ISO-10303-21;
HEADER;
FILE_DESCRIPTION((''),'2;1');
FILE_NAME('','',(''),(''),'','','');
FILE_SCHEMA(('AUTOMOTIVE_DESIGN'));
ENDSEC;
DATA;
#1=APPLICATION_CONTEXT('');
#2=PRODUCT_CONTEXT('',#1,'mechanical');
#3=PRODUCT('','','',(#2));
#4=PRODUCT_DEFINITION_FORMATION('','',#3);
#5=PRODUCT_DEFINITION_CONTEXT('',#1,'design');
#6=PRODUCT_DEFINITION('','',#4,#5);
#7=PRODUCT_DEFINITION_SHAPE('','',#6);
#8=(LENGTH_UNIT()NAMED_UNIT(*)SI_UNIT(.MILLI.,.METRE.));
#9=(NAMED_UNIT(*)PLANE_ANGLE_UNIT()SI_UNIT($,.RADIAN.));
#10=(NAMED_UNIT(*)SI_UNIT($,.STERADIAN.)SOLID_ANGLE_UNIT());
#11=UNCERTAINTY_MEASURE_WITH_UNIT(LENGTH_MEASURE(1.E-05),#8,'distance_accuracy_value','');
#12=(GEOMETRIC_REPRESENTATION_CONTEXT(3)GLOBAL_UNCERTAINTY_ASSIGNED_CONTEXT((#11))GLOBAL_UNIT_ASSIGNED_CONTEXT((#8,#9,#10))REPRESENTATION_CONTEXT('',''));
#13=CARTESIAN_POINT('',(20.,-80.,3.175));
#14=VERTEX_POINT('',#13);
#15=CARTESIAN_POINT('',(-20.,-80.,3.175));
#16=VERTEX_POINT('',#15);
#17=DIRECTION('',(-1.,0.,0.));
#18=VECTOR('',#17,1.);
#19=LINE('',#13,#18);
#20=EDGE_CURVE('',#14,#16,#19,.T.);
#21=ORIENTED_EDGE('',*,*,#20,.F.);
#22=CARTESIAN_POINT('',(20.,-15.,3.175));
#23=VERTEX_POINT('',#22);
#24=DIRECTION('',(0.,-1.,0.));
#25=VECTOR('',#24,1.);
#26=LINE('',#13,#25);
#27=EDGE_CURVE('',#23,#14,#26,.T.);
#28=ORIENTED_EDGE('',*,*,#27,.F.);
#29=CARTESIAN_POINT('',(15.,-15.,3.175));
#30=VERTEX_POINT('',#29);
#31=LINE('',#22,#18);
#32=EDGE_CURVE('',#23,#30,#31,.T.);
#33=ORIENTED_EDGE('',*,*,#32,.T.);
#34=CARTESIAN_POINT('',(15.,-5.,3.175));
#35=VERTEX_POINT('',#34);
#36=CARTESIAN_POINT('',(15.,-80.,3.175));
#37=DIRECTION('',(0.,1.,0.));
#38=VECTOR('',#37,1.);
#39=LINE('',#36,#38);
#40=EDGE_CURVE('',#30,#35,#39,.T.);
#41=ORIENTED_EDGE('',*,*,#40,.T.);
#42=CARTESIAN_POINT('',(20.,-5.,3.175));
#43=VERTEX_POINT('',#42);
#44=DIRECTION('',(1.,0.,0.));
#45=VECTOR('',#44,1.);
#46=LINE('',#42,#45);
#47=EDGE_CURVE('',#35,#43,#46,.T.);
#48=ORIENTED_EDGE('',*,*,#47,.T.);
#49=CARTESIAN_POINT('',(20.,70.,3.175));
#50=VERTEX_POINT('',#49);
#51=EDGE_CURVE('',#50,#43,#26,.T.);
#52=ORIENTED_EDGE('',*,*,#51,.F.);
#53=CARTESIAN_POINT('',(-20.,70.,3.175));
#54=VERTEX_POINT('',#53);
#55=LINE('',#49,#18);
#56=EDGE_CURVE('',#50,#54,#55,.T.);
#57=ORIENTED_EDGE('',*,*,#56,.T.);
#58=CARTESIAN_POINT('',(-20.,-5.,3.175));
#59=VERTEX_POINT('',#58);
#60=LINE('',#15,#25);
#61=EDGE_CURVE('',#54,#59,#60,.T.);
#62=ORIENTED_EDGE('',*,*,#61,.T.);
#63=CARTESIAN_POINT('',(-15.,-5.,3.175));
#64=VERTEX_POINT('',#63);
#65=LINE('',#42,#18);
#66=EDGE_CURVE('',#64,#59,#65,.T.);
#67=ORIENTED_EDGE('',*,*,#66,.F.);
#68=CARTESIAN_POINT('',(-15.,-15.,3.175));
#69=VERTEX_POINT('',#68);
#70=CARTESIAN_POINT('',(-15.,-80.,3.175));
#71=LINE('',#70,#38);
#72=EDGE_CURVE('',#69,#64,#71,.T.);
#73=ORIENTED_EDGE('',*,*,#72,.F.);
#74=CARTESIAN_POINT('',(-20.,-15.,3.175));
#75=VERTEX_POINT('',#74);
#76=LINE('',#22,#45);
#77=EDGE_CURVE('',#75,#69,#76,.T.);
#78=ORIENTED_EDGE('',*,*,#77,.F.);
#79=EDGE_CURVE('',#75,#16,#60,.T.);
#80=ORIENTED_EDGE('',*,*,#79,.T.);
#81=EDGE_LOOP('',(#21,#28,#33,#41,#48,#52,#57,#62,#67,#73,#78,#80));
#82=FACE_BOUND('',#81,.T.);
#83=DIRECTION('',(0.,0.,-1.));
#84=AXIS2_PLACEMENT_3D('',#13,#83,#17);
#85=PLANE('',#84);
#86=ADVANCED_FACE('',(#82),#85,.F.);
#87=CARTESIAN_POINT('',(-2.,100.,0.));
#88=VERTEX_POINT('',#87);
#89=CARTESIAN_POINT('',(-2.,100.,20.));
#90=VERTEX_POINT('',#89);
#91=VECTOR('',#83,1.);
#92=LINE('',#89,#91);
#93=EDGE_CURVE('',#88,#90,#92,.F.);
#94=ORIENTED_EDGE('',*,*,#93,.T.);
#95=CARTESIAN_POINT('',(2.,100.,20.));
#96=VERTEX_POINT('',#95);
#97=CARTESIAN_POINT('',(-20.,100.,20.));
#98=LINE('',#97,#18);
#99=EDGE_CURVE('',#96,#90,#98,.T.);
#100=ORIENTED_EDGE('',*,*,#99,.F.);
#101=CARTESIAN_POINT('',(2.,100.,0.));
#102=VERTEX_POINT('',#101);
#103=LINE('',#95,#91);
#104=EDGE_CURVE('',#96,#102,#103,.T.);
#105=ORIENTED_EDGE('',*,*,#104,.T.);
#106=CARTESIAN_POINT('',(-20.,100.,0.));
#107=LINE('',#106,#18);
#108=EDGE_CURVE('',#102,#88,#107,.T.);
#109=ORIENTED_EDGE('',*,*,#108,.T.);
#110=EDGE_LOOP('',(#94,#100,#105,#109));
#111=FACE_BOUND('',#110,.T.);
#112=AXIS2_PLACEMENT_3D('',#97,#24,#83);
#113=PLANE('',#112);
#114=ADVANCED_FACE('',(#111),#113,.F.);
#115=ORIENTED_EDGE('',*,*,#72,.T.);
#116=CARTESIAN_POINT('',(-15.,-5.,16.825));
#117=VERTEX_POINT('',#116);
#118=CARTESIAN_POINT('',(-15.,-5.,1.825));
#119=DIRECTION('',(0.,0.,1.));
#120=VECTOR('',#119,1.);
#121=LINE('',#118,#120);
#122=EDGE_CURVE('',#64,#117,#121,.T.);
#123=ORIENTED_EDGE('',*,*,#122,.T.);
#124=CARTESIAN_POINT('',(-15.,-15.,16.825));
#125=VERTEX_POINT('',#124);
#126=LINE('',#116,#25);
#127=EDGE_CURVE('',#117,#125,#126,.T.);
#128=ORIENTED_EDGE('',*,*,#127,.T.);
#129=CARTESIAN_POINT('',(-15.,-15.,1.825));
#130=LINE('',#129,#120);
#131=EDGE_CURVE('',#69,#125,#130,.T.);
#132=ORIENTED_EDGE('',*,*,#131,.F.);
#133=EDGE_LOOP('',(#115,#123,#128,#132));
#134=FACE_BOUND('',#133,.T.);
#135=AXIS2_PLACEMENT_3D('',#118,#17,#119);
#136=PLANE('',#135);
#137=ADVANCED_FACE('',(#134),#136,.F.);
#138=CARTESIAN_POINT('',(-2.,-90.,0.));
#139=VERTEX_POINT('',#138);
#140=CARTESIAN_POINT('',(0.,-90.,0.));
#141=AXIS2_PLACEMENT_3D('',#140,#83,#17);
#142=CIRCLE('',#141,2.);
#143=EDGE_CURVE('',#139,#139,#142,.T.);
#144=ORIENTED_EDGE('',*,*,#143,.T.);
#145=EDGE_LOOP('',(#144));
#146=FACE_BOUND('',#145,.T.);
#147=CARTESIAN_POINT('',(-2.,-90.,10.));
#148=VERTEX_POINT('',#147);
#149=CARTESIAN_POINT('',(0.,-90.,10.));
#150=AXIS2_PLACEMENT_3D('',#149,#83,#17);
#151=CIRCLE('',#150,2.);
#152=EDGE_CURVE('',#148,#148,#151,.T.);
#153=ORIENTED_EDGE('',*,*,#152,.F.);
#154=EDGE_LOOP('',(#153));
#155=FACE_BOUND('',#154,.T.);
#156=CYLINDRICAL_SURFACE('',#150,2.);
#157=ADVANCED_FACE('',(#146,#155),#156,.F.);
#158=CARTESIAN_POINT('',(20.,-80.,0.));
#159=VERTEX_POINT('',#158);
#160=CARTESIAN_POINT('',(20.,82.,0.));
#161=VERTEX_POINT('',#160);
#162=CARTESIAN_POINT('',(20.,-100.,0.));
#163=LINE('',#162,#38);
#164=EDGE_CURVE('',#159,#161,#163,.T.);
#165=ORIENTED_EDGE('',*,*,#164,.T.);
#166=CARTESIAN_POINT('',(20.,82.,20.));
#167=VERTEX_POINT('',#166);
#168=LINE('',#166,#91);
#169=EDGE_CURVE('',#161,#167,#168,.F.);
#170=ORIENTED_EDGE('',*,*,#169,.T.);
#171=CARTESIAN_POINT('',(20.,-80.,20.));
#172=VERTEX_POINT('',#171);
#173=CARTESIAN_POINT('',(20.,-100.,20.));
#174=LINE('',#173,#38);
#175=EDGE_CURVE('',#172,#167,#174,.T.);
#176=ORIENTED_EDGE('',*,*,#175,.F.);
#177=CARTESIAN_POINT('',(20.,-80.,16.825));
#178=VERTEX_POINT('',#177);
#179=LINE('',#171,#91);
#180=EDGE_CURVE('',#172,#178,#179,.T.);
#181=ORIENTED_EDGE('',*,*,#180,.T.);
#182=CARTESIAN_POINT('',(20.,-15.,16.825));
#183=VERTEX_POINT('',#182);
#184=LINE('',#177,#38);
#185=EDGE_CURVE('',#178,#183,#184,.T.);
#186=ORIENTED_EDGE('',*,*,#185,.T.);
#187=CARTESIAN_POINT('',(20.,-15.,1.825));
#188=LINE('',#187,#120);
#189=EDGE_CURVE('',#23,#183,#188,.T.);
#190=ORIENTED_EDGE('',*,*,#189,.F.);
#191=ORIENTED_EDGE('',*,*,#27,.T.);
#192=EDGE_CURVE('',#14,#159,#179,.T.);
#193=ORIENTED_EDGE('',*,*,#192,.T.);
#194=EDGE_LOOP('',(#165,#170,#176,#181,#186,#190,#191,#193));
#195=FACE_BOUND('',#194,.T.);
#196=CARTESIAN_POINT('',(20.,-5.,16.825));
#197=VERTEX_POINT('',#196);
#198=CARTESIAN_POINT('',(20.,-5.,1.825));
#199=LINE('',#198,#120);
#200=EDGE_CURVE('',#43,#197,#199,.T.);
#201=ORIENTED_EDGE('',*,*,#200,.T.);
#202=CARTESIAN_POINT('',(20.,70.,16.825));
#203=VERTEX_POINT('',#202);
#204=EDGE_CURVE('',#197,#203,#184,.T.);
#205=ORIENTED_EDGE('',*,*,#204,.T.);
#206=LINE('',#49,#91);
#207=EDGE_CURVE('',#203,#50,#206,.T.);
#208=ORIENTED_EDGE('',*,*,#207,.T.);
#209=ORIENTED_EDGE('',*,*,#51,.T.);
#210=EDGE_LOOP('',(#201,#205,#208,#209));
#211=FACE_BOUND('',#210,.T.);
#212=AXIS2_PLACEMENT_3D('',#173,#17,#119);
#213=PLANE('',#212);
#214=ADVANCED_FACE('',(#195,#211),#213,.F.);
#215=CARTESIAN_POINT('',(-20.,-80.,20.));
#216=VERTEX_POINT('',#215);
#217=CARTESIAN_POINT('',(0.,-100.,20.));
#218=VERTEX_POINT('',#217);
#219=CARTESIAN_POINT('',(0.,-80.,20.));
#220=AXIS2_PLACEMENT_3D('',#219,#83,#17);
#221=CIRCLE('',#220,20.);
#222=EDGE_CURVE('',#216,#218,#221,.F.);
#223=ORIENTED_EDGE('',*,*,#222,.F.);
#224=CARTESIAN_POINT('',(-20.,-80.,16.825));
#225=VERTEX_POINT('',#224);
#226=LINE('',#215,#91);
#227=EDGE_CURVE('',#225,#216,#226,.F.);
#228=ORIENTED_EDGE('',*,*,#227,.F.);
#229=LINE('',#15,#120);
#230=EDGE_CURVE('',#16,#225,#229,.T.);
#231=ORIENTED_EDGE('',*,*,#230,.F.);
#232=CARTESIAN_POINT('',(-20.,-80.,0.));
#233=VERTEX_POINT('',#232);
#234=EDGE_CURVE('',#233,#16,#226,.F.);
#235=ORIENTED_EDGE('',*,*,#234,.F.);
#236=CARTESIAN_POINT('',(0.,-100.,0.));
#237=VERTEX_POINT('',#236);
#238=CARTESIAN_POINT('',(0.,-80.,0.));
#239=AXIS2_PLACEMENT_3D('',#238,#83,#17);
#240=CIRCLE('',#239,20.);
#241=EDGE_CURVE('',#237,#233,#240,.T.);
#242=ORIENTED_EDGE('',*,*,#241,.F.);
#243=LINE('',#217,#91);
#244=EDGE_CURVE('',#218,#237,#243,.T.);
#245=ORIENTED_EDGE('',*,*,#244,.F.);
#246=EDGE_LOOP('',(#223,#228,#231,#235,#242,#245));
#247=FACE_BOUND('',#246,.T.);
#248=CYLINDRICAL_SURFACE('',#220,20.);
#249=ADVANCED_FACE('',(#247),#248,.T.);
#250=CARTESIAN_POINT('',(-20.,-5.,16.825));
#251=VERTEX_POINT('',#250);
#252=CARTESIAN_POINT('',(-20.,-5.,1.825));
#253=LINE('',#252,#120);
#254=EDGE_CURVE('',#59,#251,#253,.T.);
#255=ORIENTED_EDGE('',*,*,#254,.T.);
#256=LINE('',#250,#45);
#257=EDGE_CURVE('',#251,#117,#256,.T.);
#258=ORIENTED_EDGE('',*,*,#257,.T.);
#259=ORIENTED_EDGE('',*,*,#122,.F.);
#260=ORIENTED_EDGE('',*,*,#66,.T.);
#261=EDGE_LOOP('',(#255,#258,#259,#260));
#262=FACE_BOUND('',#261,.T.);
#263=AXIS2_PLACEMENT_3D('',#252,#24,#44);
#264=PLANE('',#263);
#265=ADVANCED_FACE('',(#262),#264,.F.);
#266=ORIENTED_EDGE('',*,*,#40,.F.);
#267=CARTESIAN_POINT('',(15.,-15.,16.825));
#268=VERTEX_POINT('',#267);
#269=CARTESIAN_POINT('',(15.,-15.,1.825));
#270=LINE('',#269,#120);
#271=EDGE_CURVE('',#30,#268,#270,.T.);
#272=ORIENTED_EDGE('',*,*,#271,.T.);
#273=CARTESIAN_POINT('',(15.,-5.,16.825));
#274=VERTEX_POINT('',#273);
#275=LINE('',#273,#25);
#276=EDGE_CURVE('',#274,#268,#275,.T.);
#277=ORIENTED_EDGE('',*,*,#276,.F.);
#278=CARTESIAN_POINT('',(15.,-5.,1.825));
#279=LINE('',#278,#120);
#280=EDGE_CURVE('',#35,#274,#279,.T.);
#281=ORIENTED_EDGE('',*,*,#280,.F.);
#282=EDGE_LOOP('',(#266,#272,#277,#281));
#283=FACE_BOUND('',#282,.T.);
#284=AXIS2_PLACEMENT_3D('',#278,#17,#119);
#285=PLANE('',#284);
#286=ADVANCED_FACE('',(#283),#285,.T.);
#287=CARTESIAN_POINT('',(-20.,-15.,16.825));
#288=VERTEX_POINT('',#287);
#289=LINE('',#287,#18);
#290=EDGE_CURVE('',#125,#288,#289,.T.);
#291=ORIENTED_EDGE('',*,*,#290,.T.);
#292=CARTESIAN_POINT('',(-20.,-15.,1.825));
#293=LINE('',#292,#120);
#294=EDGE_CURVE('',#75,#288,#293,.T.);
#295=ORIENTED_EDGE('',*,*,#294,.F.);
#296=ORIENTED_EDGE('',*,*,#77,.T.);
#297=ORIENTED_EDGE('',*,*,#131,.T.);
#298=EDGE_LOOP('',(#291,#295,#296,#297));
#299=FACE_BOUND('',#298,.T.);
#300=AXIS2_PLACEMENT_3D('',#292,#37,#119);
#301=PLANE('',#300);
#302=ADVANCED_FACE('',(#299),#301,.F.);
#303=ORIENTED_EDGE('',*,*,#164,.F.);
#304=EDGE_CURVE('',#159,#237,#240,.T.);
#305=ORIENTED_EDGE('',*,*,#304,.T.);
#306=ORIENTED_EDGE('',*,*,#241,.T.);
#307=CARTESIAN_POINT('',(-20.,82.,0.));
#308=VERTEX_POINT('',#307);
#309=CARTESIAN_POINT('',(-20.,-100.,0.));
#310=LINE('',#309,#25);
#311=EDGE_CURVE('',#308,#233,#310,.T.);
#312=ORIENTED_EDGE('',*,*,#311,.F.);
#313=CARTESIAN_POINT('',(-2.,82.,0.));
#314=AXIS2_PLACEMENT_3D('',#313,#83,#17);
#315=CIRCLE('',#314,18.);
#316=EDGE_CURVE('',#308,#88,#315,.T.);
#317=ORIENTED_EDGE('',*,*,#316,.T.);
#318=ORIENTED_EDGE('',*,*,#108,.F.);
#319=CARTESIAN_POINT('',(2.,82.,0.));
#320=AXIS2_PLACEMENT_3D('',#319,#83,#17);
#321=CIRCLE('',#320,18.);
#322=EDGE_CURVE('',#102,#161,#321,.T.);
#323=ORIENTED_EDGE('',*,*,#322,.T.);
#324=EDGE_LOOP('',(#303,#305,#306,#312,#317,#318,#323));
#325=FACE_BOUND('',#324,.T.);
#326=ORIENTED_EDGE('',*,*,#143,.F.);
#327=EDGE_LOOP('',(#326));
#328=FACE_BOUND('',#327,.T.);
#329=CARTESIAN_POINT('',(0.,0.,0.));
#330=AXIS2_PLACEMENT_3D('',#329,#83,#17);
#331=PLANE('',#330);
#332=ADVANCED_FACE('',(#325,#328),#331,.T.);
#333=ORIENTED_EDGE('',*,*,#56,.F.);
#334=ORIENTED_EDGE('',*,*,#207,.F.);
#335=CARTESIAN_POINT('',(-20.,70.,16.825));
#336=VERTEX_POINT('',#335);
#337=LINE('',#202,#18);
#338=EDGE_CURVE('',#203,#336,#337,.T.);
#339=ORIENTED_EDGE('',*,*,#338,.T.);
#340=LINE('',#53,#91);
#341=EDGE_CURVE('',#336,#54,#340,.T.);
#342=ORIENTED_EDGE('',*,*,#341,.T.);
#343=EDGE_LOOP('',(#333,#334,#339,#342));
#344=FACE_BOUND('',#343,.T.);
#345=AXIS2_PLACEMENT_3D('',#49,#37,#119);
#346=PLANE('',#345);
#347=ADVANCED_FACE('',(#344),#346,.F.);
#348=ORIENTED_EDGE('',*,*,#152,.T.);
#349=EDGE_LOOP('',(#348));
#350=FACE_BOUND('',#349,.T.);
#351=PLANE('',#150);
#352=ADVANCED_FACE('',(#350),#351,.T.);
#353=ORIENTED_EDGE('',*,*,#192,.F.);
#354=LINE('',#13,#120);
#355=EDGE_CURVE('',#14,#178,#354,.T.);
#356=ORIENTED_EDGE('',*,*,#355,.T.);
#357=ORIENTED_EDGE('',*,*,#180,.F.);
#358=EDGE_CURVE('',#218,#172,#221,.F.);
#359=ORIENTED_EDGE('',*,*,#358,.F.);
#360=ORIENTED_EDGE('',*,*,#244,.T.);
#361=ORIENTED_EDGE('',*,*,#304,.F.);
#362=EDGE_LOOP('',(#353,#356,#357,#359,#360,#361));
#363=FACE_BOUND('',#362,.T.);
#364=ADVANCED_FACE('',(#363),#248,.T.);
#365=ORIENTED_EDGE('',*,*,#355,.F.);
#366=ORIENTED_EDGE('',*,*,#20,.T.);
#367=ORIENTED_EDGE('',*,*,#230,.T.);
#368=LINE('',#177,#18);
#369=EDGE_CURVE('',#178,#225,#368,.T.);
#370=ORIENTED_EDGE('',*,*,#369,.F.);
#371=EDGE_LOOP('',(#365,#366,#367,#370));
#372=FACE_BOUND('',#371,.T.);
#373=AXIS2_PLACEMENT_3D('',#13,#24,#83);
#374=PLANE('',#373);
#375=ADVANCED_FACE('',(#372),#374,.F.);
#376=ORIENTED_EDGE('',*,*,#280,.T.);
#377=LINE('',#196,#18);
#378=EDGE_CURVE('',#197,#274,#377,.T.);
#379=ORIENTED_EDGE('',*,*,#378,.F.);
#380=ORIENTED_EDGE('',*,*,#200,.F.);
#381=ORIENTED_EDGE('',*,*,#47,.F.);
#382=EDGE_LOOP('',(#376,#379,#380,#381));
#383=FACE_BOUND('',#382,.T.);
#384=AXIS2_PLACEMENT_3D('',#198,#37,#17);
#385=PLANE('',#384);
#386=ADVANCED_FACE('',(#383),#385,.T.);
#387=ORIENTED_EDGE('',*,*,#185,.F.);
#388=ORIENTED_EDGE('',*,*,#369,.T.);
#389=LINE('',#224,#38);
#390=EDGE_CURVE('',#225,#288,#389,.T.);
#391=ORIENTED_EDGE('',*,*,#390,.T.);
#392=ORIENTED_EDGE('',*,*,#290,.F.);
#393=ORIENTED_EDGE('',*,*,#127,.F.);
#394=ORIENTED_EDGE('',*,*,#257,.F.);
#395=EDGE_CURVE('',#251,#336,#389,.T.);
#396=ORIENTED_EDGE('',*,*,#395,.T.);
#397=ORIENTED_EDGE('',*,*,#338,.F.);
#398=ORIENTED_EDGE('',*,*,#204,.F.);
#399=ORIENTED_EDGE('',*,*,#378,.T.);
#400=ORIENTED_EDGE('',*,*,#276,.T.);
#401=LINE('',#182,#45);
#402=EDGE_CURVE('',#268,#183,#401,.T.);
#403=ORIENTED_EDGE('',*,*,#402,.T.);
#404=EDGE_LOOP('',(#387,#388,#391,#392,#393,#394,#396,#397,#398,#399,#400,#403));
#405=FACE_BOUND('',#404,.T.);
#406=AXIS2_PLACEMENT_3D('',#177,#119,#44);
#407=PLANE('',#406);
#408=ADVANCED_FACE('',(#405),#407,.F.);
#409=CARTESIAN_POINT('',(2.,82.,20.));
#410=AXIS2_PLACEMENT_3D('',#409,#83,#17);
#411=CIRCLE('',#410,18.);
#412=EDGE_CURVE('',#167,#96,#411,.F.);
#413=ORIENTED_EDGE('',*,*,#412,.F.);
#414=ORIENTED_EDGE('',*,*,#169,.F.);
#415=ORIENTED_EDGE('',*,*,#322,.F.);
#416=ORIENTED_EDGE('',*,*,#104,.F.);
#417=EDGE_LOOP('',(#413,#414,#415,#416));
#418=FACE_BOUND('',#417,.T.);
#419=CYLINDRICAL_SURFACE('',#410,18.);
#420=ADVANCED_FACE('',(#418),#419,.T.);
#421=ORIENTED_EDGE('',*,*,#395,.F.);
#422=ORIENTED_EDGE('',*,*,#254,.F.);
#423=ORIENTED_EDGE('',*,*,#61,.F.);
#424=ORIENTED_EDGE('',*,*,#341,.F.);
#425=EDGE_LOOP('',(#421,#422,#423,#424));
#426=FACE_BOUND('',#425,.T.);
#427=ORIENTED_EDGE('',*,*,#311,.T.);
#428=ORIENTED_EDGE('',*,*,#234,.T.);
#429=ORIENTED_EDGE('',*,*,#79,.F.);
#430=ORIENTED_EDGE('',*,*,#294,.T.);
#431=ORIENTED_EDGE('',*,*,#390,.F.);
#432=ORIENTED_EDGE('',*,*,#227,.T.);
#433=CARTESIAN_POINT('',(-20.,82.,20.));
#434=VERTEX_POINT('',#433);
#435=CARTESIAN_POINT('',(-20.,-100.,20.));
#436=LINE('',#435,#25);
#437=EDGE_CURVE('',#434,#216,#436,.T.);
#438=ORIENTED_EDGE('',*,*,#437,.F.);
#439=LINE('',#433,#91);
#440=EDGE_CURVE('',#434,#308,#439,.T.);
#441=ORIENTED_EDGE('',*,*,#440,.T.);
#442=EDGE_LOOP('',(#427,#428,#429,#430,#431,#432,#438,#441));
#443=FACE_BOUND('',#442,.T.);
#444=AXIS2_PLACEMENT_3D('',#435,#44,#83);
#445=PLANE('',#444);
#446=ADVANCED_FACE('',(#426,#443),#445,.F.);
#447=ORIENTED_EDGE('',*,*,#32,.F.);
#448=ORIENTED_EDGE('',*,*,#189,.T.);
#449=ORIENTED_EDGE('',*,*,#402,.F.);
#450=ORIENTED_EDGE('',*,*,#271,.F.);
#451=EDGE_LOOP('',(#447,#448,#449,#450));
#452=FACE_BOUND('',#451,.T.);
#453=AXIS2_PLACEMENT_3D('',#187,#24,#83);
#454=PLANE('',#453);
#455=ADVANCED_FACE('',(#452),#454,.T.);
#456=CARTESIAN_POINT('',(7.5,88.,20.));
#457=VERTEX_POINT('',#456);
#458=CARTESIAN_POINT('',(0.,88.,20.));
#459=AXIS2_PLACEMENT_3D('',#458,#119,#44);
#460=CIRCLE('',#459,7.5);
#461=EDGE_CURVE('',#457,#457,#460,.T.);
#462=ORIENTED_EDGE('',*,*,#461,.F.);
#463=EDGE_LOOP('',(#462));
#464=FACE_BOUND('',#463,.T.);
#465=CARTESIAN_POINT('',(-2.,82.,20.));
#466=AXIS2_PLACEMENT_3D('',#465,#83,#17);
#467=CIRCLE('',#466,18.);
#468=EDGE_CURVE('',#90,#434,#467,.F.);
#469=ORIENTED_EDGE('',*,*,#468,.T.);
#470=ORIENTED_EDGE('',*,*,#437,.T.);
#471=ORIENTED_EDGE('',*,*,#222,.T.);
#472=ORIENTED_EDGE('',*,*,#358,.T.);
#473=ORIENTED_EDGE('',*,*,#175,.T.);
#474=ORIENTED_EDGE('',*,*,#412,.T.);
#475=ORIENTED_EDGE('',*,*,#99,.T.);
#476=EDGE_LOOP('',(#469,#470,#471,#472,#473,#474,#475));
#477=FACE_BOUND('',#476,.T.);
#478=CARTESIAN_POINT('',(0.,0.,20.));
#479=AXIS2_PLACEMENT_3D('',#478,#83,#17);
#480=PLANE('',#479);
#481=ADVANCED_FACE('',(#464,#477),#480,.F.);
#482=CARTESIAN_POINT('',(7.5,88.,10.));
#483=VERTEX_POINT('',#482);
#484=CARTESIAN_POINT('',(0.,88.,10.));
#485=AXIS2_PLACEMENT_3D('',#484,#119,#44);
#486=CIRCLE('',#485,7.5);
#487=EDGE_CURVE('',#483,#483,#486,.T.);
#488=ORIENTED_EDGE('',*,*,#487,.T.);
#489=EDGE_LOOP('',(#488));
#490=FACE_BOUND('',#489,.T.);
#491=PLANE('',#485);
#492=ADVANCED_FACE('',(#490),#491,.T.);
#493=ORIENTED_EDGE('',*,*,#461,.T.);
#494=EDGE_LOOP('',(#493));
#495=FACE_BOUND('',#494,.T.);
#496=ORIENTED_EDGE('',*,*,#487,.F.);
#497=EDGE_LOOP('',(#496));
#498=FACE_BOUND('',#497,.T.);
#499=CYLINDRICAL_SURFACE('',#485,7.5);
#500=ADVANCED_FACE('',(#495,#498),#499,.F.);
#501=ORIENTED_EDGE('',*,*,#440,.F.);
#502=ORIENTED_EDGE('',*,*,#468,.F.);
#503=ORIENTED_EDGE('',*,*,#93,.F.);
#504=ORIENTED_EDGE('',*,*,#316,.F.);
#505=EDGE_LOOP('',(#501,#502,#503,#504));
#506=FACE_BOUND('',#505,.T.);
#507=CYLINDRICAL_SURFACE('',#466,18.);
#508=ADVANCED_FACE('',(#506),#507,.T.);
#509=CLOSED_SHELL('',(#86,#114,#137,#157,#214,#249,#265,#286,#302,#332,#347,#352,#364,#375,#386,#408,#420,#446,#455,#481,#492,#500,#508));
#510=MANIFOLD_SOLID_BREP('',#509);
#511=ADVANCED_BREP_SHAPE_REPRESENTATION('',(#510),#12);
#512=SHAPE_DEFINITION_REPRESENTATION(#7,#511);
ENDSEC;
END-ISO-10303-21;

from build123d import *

# Parameters (mm, degrees)
SKETCH2_W           = 40
SKETCH2_H           = 200
BOSS_EXTRUDE1_DEPTH = 20
SKETCH3_R           = 2
CUT_EXTRUDE1_DEPTH  = 10
FILLET1_R           = 20
SKETCH5_R           = 7.5
CUT_EXTRUDE3_DEPTH  = 10
FILLET2_R           = 18
SKETCH6_W           = 13.65
SKETCH6_H           = 150
CUT_EXTRUDE4_DEPTH  = 110.544511501
SKETCH7_W           = 5
SKETCH7_H           = 10
BOSS_EXTRUDE2_DEPTH = 15


with BuildPart() as part:
    # Sketch2 → Boss-Extrude1 (new body)
    with BuildSketch(Plane.XY):
        Rectangle(SKETCH2_W, SKETCH2_H)
    extrude(amount=BOSS_EXTRUDE1_DEPTH)

    # Sketch3 → Cut-Extrude1 (cut)
    with BuildSketch(Plane(origin=(0, 0, 0), x_dir=(-1, 0, 0), z_dir=(0, 0, -1))):
        with Locations((0, -90)):
            Circle(SKETCH3_R)
    extrude(amount=-CUT_EXTRUDE1_DEPTH, mode=Mode.SUBTRACT)

    # Fillet1
    fillet1_edges = [part.edges().sort_by_distance(p)[0] for p in [
        (20, -100, 10),
        (-20, -100, 10),
    ]]
    fillet(fillet1_edges, radius=FILLET1_R - 0.0001)  # a hair under: the kernel refuses the full size

    # Sketch5 → Cut-Extrude3 (cut)
    with BuildSketch(Plane.XY.offset(20)):
        with Locations((0, 88)):
            Circle(SKETCH5_R)
    extrude(amount=-CUT_EXTRUDE3_DEPTH, mode=Mode.SUBTRACT)

    # Fillet2
    fillet2_edges = [part.edges().sort_by_distance(p)[0] for p in [
        (-20, 100, 10),
        (20, 100, 10),
    ]]
    fillet(fillet2_edges, radius=FILLET2_R)

    # Sketch6 → Cut-Extrude4 (cut, through all)
    with BuildSketch(Plane.ZY.offset(20)):
        with Locations((10, -5)):
            Rectangle(SKETCH6_W, SKETCH6_H)
    extrude(amount=-CUT_EXTRUDE4_DEPTH, mode=Mode.SUBTRACT)

    # Sketch7 → Boss-Extrude2 (add)
    with BuildSketch(Plane(origin=(0, 0, 16.825), x_dir=(-1, 0, 0), z_dir=(0, 0, -1))):
        with Locations((17.5, -10)):
            Rectangle(SKETCH7_W, SKETCH7_H)
    boss_extrude2 = extrude(amount=BOSS_EXTRUDE2_DEPTH)

    # Mirror1: Boss-Extrude2 across plane
    add(boss_extrude2.mirror(Plane(origin=(0, 0, 0), x_dir=(0, 0, 1), z_dir=(1, 0, 0))))


solid = part.part
